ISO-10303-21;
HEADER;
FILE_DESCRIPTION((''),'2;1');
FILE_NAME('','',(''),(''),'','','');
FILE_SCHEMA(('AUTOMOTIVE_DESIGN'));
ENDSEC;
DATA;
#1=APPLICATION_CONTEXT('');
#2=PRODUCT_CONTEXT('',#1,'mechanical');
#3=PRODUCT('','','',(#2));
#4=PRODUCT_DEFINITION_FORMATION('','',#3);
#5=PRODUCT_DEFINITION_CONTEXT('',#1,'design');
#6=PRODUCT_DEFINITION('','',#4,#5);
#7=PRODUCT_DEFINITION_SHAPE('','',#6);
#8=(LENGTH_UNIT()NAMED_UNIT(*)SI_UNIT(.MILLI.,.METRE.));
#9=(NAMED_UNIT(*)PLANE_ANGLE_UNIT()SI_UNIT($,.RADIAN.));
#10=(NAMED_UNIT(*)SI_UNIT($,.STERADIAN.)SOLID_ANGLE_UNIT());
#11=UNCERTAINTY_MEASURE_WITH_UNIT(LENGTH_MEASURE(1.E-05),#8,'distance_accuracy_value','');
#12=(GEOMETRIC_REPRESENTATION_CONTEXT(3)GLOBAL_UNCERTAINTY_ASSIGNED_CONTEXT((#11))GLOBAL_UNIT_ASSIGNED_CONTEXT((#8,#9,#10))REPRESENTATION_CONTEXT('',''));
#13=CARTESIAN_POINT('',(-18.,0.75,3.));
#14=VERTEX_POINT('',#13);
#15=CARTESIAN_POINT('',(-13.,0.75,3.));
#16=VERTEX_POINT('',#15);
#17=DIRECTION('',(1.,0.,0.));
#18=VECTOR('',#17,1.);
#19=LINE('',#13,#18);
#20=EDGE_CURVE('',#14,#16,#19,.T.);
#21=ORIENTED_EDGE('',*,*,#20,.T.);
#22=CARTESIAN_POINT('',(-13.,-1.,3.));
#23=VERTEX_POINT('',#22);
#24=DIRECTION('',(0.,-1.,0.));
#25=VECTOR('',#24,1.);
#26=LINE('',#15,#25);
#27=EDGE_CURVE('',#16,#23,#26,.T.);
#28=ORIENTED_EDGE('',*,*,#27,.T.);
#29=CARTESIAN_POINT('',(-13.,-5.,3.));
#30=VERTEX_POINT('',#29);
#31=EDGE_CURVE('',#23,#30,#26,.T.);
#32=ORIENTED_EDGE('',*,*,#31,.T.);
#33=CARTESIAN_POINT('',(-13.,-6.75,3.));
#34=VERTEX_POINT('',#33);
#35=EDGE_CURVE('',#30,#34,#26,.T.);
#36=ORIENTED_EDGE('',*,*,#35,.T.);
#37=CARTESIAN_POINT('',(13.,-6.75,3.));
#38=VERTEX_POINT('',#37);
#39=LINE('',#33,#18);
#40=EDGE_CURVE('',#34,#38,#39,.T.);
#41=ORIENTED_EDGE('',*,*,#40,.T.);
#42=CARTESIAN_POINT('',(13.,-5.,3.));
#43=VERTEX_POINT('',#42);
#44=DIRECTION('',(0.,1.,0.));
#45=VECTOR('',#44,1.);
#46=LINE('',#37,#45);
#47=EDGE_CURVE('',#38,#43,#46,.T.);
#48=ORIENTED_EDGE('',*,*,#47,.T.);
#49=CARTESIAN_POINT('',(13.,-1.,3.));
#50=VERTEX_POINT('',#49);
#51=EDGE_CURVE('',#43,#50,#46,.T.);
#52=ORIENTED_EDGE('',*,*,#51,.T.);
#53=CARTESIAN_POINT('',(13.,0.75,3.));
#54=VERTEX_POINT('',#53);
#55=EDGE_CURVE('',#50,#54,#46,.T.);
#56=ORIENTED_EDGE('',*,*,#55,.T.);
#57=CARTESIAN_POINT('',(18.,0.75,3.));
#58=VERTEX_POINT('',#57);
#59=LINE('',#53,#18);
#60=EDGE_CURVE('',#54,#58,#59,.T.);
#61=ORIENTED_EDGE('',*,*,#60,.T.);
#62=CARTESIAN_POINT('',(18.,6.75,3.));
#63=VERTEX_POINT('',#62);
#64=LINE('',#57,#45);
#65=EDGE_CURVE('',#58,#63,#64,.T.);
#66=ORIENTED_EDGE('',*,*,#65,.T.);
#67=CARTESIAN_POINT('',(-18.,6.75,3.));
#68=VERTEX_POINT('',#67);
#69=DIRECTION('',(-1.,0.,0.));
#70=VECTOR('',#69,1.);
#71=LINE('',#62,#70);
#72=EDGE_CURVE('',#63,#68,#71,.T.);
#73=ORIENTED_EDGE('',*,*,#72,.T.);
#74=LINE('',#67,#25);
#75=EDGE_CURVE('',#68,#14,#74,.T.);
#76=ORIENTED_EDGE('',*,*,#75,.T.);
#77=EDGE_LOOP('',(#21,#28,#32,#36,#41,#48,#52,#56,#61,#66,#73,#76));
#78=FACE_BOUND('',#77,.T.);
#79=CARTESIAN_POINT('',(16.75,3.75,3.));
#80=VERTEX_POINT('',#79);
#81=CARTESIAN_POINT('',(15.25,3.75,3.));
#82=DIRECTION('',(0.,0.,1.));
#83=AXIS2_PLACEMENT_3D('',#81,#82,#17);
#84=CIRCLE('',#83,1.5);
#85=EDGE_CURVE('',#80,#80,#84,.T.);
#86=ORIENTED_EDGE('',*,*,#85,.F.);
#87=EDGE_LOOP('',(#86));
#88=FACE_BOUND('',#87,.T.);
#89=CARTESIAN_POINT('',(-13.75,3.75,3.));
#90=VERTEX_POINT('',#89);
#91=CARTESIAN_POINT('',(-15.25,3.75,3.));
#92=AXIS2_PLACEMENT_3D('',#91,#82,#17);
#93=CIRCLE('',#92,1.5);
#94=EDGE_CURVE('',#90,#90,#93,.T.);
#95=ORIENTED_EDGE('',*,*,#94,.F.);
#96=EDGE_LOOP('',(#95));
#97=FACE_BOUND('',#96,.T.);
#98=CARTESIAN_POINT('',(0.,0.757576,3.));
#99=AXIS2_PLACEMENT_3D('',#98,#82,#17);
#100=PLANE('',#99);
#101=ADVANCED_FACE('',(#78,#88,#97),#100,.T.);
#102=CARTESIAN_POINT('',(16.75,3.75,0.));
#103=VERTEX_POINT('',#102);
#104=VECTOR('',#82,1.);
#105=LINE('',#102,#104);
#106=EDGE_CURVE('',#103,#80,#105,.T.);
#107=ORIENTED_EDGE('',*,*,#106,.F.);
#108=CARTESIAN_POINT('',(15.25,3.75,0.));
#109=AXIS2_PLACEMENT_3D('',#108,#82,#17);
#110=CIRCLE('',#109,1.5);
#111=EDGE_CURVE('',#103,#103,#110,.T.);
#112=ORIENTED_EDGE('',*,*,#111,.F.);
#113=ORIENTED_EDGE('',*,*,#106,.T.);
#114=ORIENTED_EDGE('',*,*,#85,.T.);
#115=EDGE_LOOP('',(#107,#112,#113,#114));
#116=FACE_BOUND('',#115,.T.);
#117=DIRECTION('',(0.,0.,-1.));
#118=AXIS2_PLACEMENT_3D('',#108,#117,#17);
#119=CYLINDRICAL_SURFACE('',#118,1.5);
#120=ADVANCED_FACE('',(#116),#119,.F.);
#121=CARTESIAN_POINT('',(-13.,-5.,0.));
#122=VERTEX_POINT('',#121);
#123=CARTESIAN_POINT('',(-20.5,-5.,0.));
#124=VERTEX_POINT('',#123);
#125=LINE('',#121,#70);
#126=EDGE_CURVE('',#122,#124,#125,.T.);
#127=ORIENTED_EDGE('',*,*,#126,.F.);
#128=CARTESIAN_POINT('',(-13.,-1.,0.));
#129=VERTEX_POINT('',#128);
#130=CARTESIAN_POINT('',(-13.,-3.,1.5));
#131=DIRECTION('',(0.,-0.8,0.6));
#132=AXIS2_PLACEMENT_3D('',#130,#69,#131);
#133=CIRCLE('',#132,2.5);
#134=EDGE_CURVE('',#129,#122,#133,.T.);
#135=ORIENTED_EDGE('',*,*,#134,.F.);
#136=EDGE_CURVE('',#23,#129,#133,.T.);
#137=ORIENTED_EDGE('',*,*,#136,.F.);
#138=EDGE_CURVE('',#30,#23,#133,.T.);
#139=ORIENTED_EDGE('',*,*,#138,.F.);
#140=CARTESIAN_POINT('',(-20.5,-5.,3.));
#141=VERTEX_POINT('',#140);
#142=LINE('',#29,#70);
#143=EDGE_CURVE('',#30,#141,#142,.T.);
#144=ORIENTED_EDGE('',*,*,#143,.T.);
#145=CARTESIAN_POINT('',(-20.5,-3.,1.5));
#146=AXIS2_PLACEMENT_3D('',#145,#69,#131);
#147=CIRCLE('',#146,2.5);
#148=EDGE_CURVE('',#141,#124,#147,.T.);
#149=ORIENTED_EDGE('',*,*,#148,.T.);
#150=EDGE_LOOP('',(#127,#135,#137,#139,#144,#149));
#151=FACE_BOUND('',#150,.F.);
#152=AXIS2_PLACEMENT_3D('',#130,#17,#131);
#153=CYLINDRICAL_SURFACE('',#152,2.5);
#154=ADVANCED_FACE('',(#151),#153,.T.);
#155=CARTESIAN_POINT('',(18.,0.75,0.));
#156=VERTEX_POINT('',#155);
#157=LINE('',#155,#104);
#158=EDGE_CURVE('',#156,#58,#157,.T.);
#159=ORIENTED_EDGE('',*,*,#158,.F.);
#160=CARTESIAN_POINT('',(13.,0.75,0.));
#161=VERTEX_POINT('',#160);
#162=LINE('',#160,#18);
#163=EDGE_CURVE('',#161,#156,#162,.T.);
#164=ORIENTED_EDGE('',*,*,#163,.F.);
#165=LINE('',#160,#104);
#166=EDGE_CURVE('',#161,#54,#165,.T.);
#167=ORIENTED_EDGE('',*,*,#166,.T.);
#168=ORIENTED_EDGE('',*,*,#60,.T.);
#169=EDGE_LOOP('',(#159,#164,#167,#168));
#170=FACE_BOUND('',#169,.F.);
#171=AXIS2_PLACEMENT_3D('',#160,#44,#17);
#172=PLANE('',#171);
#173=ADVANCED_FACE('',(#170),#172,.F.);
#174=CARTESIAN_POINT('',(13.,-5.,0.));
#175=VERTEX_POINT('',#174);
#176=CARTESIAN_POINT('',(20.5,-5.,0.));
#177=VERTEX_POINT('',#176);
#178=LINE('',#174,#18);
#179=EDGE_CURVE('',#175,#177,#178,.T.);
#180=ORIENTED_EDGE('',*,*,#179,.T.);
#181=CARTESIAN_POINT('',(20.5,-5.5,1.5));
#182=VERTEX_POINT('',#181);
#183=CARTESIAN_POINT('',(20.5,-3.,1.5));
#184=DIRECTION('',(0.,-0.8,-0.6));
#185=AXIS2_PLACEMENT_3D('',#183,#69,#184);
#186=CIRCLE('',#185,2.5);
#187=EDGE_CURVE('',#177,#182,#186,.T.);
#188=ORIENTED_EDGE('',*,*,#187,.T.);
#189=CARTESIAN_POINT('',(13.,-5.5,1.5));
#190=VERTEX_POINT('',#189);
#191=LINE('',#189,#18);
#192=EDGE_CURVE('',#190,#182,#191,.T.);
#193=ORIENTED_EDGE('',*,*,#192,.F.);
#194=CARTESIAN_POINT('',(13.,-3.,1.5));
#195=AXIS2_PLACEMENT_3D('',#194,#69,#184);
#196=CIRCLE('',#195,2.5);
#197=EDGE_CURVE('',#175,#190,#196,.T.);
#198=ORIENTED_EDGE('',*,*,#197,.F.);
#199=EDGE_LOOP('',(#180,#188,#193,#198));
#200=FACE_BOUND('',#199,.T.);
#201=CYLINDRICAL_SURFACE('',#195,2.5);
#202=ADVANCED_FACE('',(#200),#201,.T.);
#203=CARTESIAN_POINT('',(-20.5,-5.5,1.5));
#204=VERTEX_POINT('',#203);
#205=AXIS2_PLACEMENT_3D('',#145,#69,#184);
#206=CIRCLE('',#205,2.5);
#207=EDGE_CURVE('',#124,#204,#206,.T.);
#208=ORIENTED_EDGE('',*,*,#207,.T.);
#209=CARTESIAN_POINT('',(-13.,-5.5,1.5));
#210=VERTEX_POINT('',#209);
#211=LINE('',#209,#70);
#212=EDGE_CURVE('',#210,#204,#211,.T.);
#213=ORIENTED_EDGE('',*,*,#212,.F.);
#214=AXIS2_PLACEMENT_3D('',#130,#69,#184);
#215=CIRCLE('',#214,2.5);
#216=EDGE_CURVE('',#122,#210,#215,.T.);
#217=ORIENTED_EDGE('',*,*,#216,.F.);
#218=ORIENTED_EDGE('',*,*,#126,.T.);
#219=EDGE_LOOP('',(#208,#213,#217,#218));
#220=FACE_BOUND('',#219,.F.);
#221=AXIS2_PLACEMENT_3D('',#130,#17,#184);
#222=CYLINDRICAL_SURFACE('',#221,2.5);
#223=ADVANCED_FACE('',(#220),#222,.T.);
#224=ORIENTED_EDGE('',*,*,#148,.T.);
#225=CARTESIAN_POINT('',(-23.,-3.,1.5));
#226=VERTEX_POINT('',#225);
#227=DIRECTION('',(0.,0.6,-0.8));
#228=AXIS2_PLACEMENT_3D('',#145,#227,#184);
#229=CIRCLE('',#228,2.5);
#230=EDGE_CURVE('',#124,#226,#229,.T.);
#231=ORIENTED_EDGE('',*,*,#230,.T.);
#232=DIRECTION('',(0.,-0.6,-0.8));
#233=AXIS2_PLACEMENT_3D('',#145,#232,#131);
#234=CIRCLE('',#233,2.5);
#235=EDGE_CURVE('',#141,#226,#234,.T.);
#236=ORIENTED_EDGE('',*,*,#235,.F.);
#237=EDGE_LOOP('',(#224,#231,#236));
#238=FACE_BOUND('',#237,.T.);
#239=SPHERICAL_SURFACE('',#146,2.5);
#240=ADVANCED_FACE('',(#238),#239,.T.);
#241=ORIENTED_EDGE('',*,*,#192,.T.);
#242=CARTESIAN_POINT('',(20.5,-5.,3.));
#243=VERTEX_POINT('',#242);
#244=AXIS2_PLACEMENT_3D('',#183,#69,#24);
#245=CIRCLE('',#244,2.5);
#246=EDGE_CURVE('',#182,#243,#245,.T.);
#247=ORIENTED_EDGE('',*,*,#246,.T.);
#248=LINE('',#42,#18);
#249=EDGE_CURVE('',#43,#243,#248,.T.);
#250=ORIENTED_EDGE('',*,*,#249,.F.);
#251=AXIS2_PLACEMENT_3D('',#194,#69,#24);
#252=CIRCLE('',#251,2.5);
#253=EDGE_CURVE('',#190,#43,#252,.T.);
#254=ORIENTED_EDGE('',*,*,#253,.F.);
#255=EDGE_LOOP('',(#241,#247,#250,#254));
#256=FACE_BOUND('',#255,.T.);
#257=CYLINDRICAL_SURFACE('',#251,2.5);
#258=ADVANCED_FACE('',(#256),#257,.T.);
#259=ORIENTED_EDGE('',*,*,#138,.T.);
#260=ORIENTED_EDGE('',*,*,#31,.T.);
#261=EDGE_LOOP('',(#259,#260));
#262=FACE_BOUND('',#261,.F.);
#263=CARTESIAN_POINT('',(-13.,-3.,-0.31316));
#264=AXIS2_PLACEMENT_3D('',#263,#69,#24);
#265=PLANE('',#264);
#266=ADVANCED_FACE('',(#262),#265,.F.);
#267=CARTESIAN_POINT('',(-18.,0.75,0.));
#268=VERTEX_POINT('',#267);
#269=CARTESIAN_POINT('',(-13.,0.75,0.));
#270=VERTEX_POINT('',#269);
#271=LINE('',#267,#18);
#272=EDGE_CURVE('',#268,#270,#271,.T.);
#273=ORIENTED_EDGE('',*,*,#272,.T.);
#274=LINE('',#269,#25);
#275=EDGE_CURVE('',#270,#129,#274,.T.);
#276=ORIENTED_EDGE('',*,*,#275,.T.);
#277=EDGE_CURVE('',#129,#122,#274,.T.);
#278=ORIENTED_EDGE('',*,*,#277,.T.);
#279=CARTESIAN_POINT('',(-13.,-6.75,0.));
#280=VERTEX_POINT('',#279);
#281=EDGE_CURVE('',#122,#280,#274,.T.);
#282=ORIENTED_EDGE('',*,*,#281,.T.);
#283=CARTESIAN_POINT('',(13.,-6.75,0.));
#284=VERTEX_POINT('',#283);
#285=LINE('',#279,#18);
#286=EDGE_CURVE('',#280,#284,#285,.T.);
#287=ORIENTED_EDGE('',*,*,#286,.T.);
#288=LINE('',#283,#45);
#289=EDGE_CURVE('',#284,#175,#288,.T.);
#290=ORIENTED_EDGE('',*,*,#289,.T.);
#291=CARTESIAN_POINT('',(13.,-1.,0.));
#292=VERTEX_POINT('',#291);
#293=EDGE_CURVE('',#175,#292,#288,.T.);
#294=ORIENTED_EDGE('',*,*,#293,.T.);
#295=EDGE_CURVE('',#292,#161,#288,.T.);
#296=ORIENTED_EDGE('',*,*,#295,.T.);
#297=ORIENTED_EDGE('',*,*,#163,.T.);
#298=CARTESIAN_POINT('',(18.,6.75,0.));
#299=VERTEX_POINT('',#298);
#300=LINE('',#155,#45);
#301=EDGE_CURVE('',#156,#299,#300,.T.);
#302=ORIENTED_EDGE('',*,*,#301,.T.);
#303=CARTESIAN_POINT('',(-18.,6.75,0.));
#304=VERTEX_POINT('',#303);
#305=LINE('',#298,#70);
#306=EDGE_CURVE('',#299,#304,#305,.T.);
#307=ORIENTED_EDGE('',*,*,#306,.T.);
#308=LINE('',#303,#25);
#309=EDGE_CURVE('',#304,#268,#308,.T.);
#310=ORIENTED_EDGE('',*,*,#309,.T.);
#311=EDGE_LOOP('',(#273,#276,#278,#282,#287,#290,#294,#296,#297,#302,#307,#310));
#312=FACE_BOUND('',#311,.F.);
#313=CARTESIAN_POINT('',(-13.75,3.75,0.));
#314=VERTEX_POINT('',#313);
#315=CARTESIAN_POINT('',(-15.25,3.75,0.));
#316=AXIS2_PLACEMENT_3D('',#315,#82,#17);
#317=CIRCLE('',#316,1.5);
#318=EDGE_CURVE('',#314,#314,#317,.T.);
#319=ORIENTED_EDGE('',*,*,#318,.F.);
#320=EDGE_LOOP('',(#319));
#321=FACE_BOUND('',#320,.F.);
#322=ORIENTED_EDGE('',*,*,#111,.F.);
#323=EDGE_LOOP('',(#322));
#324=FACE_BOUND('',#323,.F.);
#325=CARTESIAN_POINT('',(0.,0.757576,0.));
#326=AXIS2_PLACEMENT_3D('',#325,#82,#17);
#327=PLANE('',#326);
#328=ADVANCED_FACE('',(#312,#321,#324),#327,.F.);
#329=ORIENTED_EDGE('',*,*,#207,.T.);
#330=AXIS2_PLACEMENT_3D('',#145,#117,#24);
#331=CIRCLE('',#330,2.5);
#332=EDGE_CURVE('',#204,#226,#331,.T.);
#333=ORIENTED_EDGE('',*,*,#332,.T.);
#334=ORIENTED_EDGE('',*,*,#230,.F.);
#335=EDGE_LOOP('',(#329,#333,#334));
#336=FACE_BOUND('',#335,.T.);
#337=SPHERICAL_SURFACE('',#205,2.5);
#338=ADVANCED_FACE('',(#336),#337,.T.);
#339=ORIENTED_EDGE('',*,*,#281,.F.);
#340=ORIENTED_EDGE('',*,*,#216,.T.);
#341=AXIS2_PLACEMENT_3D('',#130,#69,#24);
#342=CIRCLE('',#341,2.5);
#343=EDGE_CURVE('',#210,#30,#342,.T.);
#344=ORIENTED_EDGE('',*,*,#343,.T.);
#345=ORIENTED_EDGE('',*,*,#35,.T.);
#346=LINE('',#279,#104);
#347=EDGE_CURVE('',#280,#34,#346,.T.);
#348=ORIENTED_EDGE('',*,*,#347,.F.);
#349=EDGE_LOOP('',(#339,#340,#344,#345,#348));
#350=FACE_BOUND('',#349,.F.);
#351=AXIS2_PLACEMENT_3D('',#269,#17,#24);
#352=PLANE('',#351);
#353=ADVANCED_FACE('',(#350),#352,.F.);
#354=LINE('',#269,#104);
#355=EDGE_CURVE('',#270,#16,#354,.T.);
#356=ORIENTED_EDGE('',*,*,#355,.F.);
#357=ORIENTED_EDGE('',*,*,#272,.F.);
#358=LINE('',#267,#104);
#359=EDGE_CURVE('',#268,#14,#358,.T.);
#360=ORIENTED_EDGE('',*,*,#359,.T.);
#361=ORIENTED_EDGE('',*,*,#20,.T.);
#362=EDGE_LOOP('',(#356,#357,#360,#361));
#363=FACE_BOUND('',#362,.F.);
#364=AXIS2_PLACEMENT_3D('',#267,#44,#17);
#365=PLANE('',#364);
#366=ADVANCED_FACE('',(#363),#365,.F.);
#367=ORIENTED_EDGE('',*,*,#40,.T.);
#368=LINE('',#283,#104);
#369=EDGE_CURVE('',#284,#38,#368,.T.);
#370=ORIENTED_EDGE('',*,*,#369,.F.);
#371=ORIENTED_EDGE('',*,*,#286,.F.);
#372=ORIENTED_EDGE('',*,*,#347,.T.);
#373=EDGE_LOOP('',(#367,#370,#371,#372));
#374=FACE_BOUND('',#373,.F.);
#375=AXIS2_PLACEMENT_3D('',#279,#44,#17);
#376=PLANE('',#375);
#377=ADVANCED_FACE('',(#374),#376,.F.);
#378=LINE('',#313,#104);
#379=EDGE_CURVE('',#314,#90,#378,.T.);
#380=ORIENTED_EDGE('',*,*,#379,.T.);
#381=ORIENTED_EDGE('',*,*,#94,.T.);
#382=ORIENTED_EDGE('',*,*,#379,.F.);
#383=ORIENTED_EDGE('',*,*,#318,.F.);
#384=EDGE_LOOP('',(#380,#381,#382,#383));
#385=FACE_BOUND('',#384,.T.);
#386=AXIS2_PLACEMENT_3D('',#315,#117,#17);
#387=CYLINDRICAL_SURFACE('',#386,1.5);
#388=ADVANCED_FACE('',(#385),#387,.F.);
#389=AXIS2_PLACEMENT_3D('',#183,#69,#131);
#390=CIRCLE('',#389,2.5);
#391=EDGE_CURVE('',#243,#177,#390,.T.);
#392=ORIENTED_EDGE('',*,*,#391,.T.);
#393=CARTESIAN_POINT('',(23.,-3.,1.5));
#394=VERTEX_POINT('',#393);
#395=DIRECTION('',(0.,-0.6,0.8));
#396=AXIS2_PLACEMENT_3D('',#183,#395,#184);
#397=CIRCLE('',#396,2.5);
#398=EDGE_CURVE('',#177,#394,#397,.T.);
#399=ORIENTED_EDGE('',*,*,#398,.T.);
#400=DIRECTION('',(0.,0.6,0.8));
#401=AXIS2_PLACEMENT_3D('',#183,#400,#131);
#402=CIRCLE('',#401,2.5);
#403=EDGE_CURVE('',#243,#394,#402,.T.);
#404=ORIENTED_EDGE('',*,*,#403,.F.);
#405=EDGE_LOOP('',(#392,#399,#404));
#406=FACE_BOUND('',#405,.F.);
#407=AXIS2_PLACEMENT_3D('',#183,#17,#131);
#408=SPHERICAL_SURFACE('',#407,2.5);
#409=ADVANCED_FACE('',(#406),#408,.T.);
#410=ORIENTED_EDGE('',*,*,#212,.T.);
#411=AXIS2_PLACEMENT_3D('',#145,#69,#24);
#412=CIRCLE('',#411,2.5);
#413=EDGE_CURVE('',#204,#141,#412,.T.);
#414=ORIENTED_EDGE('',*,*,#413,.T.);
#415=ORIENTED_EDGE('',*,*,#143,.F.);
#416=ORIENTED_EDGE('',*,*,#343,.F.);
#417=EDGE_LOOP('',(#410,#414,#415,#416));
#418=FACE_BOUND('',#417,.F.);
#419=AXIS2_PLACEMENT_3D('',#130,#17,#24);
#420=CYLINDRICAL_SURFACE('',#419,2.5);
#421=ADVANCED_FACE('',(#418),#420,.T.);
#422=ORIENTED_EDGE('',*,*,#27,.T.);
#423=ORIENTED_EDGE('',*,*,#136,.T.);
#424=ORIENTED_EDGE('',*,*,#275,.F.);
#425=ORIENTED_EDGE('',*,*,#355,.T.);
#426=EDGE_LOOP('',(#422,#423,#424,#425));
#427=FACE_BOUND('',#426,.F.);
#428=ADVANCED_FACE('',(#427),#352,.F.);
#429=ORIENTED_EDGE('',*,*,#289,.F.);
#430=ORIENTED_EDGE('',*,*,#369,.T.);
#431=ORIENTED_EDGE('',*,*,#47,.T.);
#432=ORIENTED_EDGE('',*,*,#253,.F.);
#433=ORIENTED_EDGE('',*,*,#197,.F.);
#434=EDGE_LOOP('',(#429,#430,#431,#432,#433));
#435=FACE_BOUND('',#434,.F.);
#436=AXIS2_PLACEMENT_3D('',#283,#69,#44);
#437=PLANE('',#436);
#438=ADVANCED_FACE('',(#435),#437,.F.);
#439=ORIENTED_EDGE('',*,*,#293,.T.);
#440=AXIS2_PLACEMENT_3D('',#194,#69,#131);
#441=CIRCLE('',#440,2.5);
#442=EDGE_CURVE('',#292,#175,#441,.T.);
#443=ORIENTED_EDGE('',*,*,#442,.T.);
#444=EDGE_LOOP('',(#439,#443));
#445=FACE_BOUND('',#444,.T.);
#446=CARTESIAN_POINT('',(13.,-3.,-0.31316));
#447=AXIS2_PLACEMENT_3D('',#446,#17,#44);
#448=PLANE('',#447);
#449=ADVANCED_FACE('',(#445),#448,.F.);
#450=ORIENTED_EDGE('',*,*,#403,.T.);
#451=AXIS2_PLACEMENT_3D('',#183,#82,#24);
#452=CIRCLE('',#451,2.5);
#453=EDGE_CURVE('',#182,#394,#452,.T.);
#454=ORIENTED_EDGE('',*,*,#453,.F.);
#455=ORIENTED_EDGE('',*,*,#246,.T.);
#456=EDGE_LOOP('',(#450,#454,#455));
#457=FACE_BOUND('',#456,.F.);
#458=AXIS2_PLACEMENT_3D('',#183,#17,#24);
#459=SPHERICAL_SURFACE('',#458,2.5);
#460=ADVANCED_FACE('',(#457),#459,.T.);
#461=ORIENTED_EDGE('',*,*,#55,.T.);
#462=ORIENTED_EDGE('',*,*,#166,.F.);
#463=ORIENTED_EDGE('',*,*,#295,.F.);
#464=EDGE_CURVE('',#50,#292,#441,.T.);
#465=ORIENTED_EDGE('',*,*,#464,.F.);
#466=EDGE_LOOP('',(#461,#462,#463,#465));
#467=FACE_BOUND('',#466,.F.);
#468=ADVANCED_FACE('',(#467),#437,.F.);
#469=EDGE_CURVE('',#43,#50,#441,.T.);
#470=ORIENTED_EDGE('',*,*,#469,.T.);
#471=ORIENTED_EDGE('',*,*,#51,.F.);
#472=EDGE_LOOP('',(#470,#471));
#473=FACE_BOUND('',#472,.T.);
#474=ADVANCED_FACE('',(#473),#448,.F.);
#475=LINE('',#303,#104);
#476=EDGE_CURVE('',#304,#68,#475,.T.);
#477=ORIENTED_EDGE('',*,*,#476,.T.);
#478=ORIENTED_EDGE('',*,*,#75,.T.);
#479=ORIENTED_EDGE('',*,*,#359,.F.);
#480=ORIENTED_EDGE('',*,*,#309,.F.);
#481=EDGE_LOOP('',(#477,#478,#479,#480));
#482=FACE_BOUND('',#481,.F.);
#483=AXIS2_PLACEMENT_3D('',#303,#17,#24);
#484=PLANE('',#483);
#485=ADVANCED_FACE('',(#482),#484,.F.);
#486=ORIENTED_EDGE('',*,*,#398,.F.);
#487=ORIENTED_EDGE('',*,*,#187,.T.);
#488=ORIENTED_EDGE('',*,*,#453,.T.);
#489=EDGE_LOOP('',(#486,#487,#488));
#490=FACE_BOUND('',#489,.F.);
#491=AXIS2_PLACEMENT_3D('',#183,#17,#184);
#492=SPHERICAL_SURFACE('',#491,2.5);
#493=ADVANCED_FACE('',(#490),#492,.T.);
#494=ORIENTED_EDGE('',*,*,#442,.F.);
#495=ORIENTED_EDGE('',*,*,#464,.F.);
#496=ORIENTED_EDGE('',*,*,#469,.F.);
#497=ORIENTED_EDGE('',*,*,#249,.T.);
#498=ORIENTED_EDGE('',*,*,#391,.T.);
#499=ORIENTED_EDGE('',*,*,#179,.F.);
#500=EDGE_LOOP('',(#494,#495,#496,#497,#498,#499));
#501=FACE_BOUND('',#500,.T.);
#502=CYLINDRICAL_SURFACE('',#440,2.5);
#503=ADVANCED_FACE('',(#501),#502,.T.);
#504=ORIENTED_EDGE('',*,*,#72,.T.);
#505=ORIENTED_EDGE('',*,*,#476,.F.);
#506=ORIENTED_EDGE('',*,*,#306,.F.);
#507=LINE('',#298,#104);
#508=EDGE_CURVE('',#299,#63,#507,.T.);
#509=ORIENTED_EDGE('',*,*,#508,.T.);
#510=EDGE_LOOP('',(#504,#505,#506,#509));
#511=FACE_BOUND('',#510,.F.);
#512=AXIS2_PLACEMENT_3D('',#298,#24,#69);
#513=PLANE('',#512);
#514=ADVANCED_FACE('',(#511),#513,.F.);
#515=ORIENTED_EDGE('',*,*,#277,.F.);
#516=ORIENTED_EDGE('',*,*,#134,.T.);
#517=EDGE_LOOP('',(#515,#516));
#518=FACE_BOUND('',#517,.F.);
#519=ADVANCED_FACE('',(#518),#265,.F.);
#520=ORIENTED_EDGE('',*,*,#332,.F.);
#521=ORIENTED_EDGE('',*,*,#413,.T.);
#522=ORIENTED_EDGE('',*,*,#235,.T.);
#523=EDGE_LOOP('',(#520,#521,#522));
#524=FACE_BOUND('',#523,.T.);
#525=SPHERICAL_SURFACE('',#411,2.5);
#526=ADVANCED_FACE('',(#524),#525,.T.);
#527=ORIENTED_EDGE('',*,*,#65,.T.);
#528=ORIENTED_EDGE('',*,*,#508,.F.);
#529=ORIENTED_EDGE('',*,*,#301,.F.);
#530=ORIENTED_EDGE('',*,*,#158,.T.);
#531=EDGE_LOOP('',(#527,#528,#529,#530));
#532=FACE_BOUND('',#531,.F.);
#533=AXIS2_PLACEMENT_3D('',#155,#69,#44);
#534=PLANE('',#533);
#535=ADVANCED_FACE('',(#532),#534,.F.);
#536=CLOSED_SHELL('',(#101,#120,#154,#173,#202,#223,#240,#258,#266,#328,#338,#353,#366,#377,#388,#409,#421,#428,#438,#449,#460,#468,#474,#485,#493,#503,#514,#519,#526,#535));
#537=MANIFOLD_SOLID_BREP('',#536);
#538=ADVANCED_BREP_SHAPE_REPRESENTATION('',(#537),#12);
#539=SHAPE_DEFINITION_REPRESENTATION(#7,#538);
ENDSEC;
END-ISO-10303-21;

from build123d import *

# Parameters (mm, degrees)
F0_R     = 1.5
F1_DEPTH = 3
F3_DEPTH = 10
F4_R     = 2.5


# Not quite as in the source:
# - a pattern or mirror of a feature is missing from the dataset's text; its kind, count and spacing are read off the source's solid


with BuildPart() as f1:
    # F0 (on Top) → F1 (new body)
    with BuildSketch(Plane.XY):
        Polygon((18, 0.75), (18, 6.75), (-18, 6.75), (-18, 0.75), (-13, 0.75), (-13, -6.75), (13, -6.75), (13, 0.75), align=None)
        with Locations((-15.25, 3.75)):
            Circle(F0_R, mode=Mode.SUBTRACT)
        with Locations((15.25, 3.75)):
            Circle(F0_R, mode=Mode.SUBTRACT)
    extrude(amount=F1_DEPTH)

    # F2 (on face) → F3 (join)
    with BuildSketch(Plane(origin=(-13, 0, 0), x_dir=(0, -1, 0), z_dir=(-1, 0, 0))):
        with BuildLine():
            ThreePointArc((1, 0), (3, -1), (5, 0))
            Line((5, 0), (1, 0))
        make_face()
        with BuildLine():
            ThreePointArc((5, 0), (5.3717082451, 0.709430585), (5.5, 1.5))
            ThreePointArc((5.5, 1.5), (5.3717082451, 2.290569415), (5, 3))
            Line((5, 3), (1, 3))
            ThreePointArc((1, 3), (0.5, 1.5), (1, 0))
            Line((1, 0), (5, 0))
        make_face()
        with BuildLine():
            Line((1, 3), (5, 3))
            ThreePointArc((5, 3), (3, 4), (1, 3))
        make_face()
    f3 = extrude(amount=F3_DEPTH)

    # F3_copies: F3 across plane
    add(f3.mirror(Plane(origin=(0, 0, 0), x_dir=(0, 0, 1), z_dir=(1, 0, 0))))

    # F4
    f4_edges = [f1.edges().sort_by_distance(p)[0] for p in [
        (-23, -1, 0),
        (23, -1, 0),
    ]]
    fillet(f4_edges, radius=F4_R)


solid = f1.part
